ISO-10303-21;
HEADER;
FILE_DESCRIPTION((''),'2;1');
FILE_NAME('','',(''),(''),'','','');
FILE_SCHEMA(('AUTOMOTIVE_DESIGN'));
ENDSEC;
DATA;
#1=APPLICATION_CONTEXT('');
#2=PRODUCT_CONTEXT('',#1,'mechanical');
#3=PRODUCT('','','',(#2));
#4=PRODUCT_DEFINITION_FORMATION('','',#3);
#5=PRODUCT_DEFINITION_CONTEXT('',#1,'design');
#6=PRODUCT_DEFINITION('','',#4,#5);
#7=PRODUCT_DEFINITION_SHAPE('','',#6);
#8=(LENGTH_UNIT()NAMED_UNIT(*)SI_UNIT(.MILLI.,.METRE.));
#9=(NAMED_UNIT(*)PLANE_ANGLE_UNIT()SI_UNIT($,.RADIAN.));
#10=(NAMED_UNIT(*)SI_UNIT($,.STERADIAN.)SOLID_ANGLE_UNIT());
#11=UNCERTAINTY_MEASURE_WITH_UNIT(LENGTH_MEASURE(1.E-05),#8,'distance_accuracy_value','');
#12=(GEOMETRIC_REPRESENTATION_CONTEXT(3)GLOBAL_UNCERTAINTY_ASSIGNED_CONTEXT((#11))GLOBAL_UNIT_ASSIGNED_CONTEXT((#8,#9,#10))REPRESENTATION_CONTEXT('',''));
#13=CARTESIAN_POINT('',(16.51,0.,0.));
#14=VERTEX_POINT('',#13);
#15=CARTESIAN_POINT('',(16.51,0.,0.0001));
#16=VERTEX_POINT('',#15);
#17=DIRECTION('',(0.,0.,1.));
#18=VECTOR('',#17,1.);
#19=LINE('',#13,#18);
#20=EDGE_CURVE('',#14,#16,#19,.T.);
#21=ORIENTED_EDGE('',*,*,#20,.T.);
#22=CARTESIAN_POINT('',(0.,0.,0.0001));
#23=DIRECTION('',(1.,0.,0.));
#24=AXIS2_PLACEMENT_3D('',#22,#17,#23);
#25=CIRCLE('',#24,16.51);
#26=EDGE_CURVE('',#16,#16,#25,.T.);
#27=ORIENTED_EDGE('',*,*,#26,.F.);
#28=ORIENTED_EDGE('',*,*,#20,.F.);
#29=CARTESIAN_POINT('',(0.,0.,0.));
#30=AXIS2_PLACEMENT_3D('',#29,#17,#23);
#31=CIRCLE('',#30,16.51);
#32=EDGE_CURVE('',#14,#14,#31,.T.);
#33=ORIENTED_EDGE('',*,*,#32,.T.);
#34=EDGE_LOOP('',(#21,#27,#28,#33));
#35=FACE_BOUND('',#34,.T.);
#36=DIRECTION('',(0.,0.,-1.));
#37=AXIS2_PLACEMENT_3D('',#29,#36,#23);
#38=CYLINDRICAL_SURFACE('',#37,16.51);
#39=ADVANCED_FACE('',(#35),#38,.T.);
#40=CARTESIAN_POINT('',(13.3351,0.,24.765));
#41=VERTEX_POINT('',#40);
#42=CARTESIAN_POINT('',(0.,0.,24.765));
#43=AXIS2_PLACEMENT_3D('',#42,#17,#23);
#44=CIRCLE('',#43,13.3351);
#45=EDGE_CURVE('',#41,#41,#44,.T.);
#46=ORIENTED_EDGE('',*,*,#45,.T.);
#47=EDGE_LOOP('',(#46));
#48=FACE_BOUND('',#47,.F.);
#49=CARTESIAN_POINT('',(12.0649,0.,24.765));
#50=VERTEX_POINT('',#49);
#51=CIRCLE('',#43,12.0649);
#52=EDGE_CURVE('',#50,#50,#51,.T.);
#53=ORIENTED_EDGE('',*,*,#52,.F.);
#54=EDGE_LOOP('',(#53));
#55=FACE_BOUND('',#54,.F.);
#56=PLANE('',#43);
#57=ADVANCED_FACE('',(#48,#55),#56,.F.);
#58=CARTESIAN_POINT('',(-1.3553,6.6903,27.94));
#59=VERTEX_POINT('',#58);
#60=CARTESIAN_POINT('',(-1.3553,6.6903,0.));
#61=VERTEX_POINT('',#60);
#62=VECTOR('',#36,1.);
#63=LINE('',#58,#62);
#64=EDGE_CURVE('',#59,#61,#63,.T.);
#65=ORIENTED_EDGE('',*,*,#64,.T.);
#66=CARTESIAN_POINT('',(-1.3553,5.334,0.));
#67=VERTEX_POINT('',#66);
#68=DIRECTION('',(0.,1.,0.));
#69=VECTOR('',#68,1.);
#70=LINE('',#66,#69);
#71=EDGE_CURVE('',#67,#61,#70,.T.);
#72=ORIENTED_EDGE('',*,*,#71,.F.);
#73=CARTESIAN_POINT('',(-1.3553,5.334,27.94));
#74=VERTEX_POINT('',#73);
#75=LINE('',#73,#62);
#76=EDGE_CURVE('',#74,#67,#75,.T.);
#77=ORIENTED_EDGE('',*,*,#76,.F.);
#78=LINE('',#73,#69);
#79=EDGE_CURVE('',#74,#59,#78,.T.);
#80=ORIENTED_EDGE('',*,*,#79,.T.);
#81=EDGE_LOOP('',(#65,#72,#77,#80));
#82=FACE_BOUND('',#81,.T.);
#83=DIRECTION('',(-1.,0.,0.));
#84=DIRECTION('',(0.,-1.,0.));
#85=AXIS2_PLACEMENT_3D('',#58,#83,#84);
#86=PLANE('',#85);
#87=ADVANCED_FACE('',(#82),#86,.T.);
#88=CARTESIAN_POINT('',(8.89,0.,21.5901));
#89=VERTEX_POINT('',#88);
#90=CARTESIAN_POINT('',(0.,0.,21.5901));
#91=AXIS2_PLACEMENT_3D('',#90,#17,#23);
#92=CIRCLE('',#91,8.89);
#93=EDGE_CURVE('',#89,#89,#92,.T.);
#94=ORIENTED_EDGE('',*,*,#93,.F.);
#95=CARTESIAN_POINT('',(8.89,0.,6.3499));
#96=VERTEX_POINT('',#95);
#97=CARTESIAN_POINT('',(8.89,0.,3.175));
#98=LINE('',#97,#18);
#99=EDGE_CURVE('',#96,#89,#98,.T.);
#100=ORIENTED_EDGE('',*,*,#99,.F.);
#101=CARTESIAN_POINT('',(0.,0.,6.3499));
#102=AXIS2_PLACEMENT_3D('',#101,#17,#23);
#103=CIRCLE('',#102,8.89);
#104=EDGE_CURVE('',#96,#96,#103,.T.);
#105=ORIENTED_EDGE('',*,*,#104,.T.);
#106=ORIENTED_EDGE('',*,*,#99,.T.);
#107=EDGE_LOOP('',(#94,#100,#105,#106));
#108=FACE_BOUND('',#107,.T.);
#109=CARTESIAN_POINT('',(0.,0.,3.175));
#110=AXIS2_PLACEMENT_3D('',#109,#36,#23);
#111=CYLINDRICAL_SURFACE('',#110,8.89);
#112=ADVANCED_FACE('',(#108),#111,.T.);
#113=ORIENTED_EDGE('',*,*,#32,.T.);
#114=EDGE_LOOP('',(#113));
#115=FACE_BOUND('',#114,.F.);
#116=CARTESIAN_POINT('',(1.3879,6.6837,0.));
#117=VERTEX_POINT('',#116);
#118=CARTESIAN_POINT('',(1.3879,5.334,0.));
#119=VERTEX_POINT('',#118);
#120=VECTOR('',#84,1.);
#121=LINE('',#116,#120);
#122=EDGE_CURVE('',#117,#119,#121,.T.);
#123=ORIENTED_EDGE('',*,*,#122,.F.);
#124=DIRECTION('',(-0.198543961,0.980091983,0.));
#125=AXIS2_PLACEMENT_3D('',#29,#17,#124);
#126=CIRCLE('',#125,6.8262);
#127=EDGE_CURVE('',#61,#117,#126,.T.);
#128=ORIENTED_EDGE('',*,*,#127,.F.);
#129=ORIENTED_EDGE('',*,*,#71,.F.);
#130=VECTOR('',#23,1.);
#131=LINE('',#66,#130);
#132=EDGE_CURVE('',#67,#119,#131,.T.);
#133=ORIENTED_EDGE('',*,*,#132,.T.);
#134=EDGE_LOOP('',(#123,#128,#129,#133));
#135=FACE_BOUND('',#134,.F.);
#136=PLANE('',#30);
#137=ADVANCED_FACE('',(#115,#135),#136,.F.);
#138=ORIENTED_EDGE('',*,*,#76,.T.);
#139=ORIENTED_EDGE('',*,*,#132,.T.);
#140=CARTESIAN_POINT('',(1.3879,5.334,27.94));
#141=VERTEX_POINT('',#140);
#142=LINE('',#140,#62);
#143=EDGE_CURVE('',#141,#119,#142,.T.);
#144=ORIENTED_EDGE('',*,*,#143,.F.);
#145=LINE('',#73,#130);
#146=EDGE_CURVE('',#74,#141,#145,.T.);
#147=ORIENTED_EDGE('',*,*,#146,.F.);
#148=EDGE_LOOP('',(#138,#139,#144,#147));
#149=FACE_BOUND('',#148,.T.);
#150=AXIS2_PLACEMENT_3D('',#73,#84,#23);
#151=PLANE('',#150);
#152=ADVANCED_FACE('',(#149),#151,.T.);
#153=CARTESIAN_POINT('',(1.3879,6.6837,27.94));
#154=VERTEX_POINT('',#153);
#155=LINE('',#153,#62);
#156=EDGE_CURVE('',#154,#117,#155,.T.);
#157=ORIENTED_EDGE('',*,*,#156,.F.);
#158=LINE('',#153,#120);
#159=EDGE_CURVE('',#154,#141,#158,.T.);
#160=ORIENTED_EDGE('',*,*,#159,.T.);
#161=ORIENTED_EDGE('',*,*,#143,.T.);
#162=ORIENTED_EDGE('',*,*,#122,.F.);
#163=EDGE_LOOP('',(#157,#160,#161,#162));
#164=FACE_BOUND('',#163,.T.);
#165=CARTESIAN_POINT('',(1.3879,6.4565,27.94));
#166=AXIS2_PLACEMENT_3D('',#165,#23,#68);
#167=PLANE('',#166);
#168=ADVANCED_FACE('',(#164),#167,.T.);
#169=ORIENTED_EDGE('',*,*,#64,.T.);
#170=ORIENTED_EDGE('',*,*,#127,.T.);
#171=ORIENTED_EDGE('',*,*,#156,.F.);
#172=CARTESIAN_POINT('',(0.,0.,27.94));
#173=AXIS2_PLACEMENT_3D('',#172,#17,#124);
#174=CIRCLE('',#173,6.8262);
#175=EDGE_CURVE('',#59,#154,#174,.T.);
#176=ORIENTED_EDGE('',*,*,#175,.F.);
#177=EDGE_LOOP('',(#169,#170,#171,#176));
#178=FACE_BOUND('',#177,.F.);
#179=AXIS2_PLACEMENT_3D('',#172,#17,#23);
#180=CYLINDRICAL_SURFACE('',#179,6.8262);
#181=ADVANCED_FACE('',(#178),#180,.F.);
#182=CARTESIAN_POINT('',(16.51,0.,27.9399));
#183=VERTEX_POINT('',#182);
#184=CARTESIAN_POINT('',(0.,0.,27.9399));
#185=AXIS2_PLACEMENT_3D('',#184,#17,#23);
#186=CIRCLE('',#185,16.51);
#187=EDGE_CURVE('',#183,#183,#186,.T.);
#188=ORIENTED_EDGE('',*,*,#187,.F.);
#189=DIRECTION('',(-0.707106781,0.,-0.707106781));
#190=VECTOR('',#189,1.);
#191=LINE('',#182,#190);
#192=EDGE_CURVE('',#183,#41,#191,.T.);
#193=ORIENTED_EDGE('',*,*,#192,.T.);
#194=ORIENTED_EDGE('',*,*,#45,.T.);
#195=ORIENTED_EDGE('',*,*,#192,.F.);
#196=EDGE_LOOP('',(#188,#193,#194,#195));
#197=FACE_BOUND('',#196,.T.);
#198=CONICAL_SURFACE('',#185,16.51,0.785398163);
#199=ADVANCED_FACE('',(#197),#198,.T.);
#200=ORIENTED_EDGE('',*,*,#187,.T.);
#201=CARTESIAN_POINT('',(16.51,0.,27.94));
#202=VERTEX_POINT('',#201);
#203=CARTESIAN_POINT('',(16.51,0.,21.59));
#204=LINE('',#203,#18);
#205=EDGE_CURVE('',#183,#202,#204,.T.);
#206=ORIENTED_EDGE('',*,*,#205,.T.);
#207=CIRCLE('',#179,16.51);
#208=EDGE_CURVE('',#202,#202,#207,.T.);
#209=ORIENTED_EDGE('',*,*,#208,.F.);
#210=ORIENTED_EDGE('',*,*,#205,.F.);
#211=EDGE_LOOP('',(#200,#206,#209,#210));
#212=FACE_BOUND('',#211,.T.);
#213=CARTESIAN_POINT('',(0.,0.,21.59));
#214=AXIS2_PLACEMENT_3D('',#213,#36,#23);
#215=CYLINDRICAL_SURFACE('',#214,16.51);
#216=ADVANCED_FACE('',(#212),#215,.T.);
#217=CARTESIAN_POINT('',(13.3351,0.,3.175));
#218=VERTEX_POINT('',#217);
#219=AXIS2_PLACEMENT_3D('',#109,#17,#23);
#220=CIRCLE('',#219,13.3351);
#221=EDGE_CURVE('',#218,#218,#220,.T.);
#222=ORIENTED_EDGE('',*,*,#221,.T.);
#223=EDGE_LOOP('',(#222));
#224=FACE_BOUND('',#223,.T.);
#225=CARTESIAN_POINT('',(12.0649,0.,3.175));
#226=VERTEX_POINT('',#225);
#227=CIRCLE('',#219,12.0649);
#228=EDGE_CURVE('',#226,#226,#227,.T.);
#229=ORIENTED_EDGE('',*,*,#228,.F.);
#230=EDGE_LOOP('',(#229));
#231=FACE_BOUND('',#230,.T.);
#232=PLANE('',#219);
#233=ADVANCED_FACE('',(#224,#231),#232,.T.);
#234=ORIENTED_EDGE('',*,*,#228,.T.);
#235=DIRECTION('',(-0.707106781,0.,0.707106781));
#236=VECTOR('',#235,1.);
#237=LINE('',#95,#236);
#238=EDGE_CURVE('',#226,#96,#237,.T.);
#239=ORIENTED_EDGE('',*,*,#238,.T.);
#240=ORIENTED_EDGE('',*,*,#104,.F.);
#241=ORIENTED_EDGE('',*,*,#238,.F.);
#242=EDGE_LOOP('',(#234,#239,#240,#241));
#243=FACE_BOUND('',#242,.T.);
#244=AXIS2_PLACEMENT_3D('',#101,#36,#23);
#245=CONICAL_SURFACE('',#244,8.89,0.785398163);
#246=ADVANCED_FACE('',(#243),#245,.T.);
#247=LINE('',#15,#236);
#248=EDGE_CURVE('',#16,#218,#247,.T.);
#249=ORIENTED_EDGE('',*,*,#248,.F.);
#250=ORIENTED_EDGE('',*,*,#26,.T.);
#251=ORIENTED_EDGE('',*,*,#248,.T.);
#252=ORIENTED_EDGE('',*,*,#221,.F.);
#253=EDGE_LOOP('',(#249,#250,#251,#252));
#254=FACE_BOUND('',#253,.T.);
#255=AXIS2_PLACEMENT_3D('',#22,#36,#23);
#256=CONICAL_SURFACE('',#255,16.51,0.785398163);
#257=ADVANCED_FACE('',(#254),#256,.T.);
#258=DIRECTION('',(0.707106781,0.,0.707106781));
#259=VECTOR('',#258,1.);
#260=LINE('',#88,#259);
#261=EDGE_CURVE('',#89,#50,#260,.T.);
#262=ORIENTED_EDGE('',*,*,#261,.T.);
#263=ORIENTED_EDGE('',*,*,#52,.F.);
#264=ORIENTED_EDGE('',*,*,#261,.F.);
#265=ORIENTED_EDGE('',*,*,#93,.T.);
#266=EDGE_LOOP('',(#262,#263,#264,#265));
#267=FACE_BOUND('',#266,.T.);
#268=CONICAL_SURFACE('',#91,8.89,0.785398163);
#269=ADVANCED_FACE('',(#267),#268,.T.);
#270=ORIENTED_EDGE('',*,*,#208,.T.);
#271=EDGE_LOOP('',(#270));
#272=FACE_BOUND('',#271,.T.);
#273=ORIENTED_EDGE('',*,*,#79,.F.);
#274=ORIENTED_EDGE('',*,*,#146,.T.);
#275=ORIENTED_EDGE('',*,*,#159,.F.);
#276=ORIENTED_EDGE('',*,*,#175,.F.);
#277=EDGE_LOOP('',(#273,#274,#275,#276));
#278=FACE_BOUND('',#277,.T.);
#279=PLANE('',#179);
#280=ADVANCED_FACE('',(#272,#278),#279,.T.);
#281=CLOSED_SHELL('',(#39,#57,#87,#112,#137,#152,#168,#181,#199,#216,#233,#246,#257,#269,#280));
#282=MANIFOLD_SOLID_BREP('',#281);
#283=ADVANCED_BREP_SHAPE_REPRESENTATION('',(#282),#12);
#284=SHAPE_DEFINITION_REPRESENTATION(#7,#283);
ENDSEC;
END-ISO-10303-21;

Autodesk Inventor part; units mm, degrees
ref_plane "YZ Plane" through (0, 0, 0) normal (1, 0, 0) x (0, 1, 0)
ref_plane "XZ Plane" through (0, 0, 0) normal (0, 1, 0) x (-1, 0, 0)
ref_plane "XY Plane" through (0, 0, 0) normal (0, 0, 1) x (1, 0, 0)
sketch "Sketch1" plane through (0, 0, 0) normal (0, 0, 1) x (1, 0, 0)
  circle A0 centre (0, 0) radius 6.604
  circle A1 centre (0, 0) radius 16.51
  dimension "d0" = 13.208
  dimension "d1" = 33.02
extrude "Extrusion1" add sketch "Sketch1" along normal blind 6.35
sketch "Sketch2" plane through (0, 0, 6.35) normal (0, 0, 1) x (1, 0, 0)
  circle A0 centre (0, 0) radius 6.604
  circle A1 centre (0, 0) radius 12.7
  dimension "d4" = 25.4
extrude "Extrusion2" add sketch "Sketch2" along normal blind 15.24
sketch "Sketch3" plane through (0, 0, 21.59) normal (0, 0, 1) x (1, 0, 0)
  circle A0 centre (0, 0) radius 12.7
  circle A1 centre (0, 0) radius 16.51
  circle A2 centre (0, 0) radius 6.604
  dimension "d7" = 25.4
  dimension "d8" = 33.02
  dimension "d9" = 13.208
extrude "Extrusion3" add sketch "Sketch3" along normal blind 6.35 contours A0 | A1
sketch "Sketch4" plane through (0, 0, 27.94) normal (0, 0, 1) x (1, 0, 0)
  circle A0 centre (0, 0) radius 6.604 projected
  line L0 (1.3879, 6.604) -> (-1.3553, 6.604)
  line L1 (-1.3553, 6.604) -> (-1.3553, 5.334)
  line L2 (-1.3553, 5.334) -> (1.3879, 5.334)
  line L3 (1.3879, 5.334) -> (1.3879, 6.604)
  point P0 (-2.9121, 5.9273)
  point P1 (-1.3626, 6.604)
  dimension "d12" = 2.7432
  dimension "d13" = 1.27
extrude "Extrusion4" add sketch "Sketch4" against normal blind 27.94 contours L3 L2 L1 A0 | A0 L0 L3 | L1 L0 A0 picked at (0.0109, 5.7573)
sketch "Sketch5" plane through (0, 0, 21.59) normal (0, 0, -1) x (-1, 0, 0)
  arc A0 (-1.3879, 6.4565) -> (1.3553, 6.4634) centre (0, 0) ccw projected
  circle A1 centre (0, 0) radius 12.7
  circle A2 centre (0, 0) radius 16.1987
  circle A3 centre (0, 0) radius 16.51
  dimension "d16" = 33.02
extrude "Extrusion5" cut sketch "Sketch5" against normal blind 3.175 contours A2 | A3
sketch "Sketch6" plane through (0, 0, 6.35) normal (0, 0, 1) x (1, 0, 0)
  circle A0 centre (0, 0) radius 12.7
  circle A1 centre (0, 0) radius 16.51
  dimension "d19" = 25.4
  dimension "d20" = 33.02
extrude "Extrusion6" cut sketch "Sketch6" against normal blind 3.175
sketch "Sketch7" plane through (0, 0, 3.175) normal (0, 0, 1) x (1, 0, 0)
  circle A0 centre (0, 0) radius 8.89
  circle A1 centre (0, 0) radius 12.7
  dimension "d23" = 17.78
  dimension "d24" = 25.4
extrude "Extrusion7" cut sketch "Sketch7" along normal blind 21.59
chamfer "Chamfer1" distance 3.175 angle 45 4 edges at (-8.89, 0, 3.175) (-16.51, 0, 3.175) (-8.89, 0, 24.765) (-16.51, 0, 24.765)
sketch "Sketch8" plane through (0, 0, 27.94) normal (0, 0, 1) x (1, 0, 0)
  circle A0 centre (0, 0) radius 6.8262
  line L0 (-1.3553, 5.334) -> (-1.3553, 6.4634) projected
  line L1 (-1.3553, 6.6903) -> (-1.3553, 5.334)
  line L2 (1.3879, 6.4565) -> (1.3879, 5.334) projected
  line L3 (-1.3553, 5.334) -> (1.3879, 5.334)
  line L4 (1.3879, 5.334) -> (1.3879, 6.6837)
  dimension "d30" = 13.6525
extrude "Extrusion8" cut sketch "Sketch8" against normal blind 50.8 contours A0 L1 L0 L3 L2 L4 picked at (-0.1975, 1.2902)
properties part number "spool"
